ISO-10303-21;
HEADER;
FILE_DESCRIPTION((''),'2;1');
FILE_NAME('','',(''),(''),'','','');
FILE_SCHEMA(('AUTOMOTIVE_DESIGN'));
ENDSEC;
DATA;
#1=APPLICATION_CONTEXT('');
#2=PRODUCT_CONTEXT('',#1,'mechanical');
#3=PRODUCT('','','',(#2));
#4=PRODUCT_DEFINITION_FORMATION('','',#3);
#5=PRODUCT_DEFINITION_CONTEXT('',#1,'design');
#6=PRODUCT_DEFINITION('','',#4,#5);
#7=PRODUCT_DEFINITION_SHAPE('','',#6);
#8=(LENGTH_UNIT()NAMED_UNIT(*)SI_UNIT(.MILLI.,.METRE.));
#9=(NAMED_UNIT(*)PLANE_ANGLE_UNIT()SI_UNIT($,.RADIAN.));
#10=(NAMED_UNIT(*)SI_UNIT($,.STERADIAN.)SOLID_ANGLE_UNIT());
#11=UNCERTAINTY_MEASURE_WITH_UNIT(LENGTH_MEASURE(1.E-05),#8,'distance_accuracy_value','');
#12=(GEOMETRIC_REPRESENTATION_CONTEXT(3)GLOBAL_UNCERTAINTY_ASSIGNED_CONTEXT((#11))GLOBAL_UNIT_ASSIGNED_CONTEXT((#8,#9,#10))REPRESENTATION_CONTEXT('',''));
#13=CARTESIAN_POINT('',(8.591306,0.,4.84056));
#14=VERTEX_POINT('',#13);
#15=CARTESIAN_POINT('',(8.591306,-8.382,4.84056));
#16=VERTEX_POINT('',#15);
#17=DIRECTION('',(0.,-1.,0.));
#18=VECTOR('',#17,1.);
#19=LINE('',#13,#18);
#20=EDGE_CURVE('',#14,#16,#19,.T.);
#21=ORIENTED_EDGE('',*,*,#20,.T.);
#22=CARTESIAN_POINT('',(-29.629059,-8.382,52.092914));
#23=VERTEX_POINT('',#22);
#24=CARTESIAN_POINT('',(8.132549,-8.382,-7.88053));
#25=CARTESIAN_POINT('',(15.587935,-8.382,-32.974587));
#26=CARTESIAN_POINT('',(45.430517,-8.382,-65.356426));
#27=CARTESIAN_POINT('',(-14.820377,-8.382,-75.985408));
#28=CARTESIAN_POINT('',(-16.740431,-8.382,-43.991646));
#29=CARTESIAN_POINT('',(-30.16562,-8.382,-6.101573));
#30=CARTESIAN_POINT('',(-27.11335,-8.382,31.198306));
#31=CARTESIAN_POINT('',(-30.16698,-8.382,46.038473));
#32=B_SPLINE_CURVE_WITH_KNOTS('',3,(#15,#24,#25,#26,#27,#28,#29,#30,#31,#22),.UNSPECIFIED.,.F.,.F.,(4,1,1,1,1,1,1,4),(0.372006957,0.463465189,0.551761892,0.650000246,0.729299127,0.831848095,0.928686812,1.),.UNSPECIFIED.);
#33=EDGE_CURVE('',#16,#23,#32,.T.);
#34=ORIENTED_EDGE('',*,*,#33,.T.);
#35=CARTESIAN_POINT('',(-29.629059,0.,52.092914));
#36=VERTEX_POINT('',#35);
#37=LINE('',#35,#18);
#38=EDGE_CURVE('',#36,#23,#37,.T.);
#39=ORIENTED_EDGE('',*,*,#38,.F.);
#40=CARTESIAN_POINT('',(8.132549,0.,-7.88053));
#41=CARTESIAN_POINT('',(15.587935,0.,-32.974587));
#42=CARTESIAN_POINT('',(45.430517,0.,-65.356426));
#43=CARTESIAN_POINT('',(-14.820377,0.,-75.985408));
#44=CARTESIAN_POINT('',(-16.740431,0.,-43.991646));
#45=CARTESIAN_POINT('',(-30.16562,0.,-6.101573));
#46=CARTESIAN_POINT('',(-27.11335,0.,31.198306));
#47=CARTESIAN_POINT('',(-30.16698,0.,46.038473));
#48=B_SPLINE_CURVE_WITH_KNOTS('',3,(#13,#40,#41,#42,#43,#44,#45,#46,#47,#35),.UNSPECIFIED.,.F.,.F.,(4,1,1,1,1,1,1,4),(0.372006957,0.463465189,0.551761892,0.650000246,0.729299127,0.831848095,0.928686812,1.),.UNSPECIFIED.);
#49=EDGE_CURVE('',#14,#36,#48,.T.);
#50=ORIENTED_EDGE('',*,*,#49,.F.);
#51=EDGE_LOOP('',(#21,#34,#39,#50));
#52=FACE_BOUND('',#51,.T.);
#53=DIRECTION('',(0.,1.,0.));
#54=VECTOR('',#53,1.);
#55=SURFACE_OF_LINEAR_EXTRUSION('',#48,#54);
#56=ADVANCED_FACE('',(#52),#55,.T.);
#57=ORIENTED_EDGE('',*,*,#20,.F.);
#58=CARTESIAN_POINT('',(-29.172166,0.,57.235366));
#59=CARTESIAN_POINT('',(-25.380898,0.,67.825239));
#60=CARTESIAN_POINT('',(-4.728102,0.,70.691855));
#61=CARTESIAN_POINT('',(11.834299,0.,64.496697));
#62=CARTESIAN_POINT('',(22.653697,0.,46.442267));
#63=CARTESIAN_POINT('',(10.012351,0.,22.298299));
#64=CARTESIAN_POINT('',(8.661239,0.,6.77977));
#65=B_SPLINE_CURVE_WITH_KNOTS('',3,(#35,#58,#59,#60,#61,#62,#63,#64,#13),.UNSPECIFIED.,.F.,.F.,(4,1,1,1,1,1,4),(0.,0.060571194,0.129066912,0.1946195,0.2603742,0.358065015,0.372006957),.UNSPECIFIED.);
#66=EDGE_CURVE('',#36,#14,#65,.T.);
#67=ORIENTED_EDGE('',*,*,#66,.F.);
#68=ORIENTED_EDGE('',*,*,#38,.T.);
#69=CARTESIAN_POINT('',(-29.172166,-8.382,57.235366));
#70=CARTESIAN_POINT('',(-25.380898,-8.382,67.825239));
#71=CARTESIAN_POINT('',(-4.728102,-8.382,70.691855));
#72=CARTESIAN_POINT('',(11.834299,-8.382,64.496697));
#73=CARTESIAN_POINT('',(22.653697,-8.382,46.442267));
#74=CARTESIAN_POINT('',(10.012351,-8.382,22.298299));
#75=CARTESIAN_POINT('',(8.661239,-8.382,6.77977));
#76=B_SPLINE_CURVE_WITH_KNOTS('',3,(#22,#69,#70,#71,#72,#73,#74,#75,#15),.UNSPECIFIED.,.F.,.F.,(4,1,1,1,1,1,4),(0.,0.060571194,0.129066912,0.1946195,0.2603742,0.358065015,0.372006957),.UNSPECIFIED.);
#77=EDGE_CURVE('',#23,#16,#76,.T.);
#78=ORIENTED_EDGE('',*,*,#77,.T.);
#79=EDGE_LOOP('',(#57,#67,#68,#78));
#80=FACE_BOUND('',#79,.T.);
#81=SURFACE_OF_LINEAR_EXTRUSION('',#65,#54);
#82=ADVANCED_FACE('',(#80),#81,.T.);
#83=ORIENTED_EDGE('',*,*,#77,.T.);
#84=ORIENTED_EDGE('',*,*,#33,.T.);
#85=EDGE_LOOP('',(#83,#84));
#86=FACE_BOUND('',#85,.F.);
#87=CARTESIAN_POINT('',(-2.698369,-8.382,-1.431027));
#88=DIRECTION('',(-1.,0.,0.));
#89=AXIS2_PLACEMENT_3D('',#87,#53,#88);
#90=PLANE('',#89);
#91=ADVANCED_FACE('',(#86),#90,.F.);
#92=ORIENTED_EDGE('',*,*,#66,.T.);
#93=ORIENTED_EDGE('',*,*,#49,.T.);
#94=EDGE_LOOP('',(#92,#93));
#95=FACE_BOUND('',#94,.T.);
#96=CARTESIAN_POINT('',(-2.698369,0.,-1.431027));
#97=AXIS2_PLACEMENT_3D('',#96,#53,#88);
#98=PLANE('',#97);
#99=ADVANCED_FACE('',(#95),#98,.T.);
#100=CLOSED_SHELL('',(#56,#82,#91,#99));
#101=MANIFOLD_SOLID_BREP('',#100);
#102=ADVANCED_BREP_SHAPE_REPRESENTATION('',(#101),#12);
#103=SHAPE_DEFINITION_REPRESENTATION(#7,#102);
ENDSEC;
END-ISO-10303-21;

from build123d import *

# Parameters (mm, degrees)
F1_DEPTH = 8.382


with BuildPart() as f1:
    # F0 (on Front) → F1 (new body)
    with BuildSketch(Plane.XZ):
        with BuildLine():
            add(Edge.make_bspline(
                [(-29.6290591359, 52.0929135382), (-29.1721656164, 57.2353658162), (-25.3808979719, 67.8252387617), (-4.7281024672, 70.6918550098), (11.8342986189, 64.4966971157), (22.6536969715, 46.4422673983), (10.0123512504, 22.2982985007), (8.6612392429, 6.7797701254), (8.5913060935, 4.8405602013)],
                knots=[0, 0, 0, 0, 0.0605711944, 0.1290669119, 0.1946194996, 0.2603741999, 0.358065015, 0.3720069572, 0.3720069572, 0.3720069572, 0.3720069572], degree=3))
            add(Edge.make_bspline(
                [(8.5913060935, 4.8405602013), (8.1325491937, -7.8805304521), (15.5879350635, -32.9745869754), (45.4305166994, -65.3564264611), (-14.8203768574, -75.9854083707), (-16.7404311733, -43.9916462979), (-30.165620113, -6.1015732313), (-27.1133502841, 31.1983059283), (-30.1669803996, 46.0384734785), (-29.6290591359, 52.0929135382)],
                knots=[0.3720069572, 0.3720069572, 0.3720069572, 0.3720069572, 0.4634651891, 0.551761892, 0.650000246, 0.7292991273, 0.8318480954, 0.928686812, 1, 1, 1, 1], degree=3))
        make_face()
    extrude(amount=F1_DEPTH)


solid = f1.part
